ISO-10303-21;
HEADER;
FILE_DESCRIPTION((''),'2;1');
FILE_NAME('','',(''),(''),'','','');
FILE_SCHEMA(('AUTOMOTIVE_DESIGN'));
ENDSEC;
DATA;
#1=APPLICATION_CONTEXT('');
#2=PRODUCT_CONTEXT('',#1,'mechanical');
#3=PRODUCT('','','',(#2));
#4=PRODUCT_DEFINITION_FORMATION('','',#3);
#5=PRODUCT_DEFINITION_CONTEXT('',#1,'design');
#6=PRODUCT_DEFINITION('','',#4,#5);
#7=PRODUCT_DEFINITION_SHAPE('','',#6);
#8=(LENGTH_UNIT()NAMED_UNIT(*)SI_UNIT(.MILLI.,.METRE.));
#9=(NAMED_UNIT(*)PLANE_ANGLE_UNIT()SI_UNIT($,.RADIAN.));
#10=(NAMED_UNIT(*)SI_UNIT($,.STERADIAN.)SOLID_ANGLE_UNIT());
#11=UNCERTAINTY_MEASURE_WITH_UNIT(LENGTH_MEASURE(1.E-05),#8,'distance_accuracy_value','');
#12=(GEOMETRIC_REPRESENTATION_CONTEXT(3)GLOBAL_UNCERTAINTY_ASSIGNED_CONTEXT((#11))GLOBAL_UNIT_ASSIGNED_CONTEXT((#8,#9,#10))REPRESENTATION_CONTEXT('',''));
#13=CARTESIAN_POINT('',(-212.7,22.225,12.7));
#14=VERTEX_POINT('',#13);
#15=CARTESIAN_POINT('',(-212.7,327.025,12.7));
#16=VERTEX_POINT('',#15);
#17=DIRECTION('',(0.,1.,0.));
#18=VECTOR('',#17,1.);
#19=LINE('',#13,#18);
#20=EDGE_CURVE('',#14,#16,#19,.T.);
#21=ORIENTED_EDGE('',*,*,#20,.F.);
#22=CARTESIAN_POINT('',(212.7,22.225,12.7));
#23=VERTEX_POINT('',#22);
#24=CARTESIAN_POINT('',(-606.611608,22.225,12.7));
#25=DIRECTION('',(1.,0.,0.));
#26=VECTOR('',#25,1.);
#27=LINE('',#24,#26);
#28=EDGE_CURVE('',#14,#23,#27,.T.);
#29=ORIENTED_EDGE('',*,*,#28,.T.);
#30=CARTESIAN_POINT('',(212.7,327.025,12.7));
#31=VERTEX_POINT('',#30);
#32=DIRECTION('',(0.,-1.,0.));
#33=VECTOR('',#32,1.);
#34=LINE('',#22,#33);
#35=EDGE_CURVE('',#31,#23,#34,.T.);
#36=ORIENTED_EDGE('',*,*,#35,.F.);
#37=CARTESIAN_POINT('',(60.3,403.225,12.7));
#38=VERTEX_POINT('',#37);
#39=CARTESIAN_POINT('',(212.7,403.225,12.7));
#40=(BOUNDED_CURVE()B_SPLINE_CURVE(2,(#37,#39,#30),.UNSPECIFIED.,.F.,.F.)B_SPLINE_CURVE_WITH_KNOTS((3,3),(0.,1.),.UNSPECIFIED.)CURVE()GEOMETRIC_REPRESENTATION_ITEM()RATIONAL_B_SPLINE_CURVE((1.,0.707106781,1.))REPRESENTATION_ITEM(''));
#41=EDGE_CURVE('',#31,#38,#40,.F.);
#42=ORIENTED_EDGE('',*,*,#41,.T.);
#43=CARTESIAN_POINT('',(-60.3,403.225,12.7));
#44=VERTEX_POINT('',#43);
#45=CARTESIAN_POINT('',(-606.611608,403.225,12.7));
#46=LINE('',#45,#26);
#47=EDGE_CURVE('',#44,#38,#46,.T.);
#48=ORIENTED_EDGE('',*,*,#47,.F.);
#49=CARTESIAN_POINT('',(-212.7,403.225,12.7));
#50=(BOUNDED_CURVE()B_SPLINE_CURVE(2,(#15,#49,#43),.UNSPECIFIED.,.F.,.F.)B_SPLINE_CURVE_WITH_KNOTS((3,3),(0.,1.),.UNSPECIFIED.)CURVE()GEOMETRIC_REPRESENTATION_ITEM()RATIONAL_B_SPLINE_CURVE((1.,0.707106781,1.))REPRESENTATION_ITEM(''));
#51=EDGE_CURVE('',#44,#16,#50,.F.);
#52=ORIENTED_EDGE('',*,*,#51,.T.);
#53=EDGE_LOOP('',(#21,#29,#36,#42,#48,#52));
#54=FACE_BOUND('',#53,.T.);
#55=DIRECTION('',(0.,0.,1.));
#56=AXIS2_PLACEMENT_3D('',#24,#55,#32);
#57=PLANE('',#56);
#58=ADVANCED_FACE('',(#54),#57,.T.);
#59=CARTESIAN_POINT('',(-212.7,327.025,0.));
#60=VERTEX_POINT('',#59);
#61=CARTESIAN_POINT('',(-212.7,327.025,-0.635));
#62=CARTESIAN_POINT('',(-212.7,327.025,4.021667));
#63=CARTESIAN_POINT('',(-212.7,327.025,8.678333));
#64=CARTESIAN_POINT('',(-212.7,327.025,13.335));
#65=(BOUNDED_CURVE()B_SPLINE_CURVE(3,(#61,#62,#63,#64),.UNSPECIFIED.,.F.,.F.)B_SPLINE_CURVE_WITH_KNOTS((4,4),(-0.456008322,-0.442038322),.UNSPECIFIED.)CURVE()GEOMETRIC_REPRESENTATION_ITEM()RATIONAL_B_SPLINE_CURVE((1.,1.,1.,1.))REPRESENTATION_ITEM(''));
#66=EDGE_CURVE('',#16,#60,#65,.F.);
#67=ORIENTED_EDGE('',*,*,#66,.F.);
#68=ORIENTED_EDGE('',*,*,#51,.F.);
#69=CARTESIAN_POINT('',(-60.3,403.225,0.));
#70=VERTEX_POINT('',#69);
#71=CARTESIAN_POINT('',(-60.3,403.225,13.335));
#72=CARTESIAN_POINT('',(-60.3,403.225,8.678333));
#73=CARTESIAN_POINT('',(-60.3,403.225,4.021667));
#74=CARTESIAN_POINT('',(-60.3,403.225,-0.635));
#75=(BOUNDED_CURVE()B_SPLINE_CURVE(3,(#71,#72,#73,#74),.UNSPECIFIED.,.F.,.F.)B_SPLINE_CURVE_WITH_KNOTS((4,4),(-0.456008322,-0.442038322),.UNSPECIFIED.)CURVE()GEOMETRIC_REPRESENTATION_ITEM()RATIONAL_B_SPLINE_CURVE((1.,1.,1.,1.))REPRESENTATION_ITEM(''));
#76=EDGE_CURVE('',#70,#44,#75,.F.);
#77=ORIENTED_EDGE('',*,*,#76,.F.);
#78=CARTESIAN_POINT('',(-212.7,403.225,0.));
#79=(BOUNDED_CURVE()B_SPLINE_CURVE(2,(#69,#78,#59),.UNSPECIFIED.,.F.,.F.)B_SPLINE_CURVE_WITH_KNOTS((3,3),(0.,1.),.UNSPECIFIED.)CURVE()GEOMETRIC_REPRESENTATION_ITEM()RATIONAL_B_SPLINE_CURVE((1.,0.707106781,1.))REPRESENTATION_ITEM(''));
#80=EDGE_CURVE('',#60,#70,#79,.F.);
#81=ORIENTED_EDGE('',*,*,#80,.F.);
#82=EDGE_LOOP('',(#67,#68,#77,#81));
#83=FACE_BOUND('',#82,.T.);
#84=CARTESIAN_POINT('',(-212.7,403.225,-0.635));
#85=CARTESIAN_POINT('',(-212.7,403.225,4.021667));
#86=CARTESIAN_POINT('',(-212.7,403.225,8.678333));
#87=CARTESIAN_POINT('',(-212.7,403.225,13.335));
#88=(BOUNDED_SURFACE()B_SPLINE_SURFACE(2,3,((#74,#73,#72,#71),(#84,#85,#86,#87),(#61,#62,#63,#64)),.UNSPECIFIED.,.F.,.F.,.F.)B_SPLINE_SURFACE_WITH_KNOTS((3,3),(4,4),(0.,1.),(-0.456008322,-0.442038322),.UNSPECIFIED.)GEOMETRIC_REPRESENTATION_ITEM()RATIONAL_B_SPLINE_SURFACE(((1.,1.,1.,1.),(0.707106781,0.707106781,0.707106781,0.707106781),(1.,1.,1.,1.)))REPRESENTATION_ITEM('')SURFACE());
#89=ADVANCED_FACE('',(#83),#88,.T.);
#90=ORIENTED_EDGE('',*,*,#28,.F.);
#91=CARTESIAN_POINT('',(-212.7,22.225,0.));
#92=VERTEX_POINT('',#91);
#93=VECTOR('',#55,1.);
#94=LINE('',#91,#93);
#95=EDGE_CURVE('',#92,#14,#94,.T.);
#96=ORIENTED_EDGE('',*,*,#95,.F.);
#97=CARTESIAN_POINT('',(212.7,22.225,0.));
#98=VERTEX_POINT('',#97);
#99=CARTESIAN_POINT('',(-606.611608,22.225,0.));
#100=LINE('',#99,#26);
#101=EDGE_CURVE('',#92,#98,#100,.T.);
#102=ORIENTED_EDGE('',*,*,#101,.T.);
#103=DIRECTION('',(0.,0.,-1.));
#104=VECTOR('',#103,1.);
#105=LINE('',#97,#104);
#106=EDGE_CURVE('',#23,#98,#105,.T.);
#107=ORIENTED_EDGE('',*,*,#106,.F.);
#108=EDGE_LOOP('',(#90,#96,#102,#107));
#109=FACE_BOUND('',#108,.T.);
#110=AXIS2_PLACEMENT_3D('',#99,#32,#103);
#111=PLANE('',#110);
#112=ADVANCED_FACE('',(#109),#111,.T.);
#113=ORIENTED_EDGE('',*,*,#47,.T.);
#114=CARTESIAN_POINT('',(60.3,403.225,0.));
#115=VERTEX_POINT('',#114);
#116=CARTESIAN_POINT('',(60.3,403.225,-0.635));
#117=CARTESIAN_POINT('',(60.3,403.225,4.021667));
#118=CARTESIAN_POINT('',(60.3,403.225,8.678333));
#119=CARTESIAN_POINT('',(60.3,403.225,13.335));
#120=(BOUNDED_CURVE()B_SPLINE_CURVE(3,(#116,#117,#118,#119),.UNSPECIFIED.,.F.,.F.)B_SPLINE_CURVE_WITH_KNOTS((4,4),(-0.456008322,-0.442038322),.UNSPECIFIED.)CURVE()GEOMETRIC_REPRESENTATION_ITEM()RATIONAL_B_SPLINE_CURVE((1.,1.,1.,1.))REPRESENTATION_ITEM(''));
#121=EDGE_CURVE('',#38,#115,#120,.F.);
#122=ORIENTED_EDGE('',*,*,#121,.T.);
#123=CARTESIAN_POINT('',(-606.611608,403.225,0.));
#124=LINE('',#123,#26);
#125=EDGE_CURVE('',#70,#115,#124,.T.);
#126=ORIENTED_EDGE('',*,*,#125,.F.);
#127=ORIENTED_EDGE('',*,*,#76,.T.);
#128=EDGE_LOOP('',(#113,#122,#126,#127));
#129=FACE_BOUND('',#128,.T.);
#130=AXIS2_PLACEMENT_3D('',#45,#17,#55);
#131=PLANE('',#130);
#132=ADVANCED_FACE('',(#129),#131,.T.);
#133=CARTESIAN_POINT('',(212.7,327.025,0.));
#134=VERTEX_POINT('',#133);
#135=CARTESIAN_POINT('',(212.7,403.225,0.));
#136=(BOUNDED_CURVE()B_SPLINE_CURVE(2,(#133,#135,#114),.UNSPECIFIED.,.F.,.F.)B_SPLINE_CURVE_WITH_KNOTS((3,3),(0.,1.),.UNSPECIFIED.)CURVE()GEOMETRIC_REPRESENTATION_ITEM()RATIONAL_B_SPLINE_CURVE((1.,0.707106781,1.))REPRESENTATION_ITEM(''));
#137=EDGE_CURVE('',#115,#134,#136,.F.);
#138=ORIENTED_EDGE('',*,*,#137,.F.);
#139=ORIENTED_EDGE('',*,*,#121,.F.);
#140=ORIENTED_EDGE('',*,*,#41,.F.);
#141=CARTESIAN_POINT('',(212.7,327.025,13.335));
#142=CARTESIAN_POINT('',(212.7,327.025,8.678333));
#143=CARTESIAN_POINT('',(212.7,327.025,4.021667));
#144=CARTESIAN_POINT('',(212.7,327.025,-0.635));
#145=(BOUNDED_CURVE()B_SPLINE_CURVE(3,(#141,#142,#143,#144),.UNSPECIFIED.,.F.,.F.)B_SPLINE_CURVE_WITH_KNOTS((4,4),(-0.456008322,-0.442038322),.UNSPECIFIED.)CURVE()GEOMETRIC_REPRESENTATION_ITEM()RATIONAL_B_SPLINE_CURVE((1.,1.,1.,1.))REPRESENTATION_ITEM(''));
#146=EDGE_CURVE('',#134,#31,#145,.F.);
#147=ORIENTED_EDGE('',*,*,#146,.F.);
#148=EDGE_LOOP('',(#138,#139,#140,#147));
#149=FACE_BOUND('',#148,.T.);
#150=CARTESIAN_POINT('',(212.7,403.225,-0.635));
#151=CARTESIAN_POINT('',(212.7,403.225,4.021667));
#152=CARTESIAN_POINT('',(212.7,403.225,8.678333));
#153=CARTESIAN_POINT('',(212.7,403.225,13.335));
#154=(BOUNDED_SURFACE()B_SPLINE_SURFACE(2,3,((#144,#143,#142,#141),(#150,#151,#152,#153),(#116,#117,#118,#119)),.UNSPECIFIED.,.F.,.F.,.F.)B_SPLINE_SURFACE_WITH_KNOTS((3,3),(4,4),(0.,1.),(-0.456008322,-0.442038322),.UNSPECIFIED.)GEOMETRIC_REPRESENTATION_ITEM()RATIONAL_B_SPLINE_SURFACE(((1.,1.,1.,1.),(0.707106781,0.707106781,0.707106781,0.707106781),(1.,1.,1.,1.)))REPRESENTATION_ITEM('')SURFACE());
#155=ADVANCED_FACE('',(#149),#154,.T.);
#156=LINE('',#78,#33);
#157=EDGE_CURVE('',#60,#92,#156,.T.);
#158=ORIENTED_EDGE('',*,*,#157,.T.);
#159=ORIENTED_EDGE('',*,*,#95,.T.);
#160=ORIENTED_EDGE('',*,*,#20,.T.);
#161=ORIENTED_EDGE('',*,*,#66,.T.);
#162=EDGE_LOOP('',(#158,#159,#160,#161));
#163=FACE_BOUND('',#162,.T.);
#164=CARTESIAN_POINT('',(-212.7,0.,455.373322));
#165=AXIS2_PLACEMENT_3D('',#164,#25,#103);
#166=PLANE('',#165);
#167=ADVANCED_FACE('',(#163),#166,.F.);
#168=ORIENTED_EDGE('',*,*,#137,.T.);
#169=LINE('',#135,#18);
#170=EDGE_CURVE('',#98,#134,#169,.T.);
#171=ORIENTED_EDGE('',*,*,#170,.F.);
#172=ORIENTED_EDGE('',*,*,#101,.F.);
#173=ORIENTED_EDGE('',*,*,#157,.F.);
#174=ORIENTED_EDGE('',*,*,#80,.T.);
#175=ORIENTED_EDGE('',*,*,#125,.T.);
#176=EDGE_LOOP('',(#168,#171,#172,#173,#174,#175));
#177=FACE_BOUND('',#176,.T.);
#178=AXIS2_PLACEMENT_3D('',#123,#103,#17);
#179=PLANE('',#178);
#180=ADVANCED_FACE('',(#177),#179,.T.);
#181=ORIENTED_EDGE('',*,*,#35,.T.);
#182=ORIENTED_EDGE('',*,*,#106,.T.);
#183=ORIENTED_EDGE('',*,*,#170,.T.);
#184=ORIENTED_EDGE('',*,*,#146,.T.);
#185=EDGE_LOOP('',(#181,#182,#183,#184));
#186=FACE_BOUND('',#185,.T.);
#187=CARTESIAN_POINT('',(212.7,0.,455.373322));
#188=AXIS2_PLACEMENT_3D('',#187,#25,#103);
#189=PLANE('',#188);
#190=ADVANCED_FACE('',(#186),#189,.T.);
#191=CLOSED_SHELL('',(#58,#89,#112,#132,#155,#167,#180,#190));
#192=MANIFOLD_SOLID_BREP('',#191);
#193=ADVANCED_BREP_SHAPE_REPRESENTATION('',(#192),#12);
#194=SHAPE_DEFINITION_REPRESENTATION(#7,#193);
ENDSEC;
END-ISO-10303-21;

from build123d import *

# Parameters (mm, degrees)
BOSS_EXTRUDE1_DEPTH      = 212.7
BOSS_EXTRUDE1_DEPTH_BACK = 212.7
SKETCH2_W                = 12.7
SKETCH2_H                = 381
FILLET1_SIZE             = 152.4
FILLET1_SIZE_2           = 76.2


with BuildPart() as part:
    # Sketch2 → Boss-Extrude1 (new, two sides: drawn at the far end of the back side and taken through both)
    with BuildSketch(Plane(origin=(0, 0, 0), x_dir=(0, 0, -1), z_dir=(1, 0, 0)).offset(-BOSS_EXTRUDE1_DEPTH_BACK)):
        with Locations((-6.35, 212.725)):
            Rectangle(SKETCH2_W, SKETCH2_H)
    extrude(amount=BOSS_EXTRUDE1_DEPTH + BOSS_EXTRUDE1_DEPTH_BACK)

    # Fillet1
    # an asymmetric fillet: 152.4, 76.2 mm, written as the material it takes off along each edge
    with BuildSketch(Plane(origin=(212.7, 403.225, 393.7), x_dir=(-1, 0, 0), z_dir=(0, 0, -1))) as fillet1_piece_1:
        with BuildLine():
            Bezier((FILLET1_SIZE, 0), (0, 0), (0, -FILLET1_SIZE_2), weights=[1, 0.707106781, 1])
            Line((0, -FILLET1_SIZE_2), (0, 0))
            Line((0, 0), (FILLET1_SIZE, 0))
        make_face()
    extrude(amount=774.7, mode=Mode.SUBTRACT)
    with BuildSketch(Plane(origin=(-212.7, 403.225, 393.7), x_dir=(1, 0, 0), z_dir=(0, 0, -1))) as fillet1_piece_2:
        with BuildLine():
            Bezier((FILLET1_SIZE, 0), (0, 0), (0, FILLET1_SIZE_2), weights=[1, 0.707106781, 1])
            Line((0, FILLET1_SIZE_2), (0, 0))
            Line((0, 0), (FILLET1_SIZE, 0))
        make_face()
    extrude(amount=774.7, mode=Mode.SUBTRACT)


solid = part.part
